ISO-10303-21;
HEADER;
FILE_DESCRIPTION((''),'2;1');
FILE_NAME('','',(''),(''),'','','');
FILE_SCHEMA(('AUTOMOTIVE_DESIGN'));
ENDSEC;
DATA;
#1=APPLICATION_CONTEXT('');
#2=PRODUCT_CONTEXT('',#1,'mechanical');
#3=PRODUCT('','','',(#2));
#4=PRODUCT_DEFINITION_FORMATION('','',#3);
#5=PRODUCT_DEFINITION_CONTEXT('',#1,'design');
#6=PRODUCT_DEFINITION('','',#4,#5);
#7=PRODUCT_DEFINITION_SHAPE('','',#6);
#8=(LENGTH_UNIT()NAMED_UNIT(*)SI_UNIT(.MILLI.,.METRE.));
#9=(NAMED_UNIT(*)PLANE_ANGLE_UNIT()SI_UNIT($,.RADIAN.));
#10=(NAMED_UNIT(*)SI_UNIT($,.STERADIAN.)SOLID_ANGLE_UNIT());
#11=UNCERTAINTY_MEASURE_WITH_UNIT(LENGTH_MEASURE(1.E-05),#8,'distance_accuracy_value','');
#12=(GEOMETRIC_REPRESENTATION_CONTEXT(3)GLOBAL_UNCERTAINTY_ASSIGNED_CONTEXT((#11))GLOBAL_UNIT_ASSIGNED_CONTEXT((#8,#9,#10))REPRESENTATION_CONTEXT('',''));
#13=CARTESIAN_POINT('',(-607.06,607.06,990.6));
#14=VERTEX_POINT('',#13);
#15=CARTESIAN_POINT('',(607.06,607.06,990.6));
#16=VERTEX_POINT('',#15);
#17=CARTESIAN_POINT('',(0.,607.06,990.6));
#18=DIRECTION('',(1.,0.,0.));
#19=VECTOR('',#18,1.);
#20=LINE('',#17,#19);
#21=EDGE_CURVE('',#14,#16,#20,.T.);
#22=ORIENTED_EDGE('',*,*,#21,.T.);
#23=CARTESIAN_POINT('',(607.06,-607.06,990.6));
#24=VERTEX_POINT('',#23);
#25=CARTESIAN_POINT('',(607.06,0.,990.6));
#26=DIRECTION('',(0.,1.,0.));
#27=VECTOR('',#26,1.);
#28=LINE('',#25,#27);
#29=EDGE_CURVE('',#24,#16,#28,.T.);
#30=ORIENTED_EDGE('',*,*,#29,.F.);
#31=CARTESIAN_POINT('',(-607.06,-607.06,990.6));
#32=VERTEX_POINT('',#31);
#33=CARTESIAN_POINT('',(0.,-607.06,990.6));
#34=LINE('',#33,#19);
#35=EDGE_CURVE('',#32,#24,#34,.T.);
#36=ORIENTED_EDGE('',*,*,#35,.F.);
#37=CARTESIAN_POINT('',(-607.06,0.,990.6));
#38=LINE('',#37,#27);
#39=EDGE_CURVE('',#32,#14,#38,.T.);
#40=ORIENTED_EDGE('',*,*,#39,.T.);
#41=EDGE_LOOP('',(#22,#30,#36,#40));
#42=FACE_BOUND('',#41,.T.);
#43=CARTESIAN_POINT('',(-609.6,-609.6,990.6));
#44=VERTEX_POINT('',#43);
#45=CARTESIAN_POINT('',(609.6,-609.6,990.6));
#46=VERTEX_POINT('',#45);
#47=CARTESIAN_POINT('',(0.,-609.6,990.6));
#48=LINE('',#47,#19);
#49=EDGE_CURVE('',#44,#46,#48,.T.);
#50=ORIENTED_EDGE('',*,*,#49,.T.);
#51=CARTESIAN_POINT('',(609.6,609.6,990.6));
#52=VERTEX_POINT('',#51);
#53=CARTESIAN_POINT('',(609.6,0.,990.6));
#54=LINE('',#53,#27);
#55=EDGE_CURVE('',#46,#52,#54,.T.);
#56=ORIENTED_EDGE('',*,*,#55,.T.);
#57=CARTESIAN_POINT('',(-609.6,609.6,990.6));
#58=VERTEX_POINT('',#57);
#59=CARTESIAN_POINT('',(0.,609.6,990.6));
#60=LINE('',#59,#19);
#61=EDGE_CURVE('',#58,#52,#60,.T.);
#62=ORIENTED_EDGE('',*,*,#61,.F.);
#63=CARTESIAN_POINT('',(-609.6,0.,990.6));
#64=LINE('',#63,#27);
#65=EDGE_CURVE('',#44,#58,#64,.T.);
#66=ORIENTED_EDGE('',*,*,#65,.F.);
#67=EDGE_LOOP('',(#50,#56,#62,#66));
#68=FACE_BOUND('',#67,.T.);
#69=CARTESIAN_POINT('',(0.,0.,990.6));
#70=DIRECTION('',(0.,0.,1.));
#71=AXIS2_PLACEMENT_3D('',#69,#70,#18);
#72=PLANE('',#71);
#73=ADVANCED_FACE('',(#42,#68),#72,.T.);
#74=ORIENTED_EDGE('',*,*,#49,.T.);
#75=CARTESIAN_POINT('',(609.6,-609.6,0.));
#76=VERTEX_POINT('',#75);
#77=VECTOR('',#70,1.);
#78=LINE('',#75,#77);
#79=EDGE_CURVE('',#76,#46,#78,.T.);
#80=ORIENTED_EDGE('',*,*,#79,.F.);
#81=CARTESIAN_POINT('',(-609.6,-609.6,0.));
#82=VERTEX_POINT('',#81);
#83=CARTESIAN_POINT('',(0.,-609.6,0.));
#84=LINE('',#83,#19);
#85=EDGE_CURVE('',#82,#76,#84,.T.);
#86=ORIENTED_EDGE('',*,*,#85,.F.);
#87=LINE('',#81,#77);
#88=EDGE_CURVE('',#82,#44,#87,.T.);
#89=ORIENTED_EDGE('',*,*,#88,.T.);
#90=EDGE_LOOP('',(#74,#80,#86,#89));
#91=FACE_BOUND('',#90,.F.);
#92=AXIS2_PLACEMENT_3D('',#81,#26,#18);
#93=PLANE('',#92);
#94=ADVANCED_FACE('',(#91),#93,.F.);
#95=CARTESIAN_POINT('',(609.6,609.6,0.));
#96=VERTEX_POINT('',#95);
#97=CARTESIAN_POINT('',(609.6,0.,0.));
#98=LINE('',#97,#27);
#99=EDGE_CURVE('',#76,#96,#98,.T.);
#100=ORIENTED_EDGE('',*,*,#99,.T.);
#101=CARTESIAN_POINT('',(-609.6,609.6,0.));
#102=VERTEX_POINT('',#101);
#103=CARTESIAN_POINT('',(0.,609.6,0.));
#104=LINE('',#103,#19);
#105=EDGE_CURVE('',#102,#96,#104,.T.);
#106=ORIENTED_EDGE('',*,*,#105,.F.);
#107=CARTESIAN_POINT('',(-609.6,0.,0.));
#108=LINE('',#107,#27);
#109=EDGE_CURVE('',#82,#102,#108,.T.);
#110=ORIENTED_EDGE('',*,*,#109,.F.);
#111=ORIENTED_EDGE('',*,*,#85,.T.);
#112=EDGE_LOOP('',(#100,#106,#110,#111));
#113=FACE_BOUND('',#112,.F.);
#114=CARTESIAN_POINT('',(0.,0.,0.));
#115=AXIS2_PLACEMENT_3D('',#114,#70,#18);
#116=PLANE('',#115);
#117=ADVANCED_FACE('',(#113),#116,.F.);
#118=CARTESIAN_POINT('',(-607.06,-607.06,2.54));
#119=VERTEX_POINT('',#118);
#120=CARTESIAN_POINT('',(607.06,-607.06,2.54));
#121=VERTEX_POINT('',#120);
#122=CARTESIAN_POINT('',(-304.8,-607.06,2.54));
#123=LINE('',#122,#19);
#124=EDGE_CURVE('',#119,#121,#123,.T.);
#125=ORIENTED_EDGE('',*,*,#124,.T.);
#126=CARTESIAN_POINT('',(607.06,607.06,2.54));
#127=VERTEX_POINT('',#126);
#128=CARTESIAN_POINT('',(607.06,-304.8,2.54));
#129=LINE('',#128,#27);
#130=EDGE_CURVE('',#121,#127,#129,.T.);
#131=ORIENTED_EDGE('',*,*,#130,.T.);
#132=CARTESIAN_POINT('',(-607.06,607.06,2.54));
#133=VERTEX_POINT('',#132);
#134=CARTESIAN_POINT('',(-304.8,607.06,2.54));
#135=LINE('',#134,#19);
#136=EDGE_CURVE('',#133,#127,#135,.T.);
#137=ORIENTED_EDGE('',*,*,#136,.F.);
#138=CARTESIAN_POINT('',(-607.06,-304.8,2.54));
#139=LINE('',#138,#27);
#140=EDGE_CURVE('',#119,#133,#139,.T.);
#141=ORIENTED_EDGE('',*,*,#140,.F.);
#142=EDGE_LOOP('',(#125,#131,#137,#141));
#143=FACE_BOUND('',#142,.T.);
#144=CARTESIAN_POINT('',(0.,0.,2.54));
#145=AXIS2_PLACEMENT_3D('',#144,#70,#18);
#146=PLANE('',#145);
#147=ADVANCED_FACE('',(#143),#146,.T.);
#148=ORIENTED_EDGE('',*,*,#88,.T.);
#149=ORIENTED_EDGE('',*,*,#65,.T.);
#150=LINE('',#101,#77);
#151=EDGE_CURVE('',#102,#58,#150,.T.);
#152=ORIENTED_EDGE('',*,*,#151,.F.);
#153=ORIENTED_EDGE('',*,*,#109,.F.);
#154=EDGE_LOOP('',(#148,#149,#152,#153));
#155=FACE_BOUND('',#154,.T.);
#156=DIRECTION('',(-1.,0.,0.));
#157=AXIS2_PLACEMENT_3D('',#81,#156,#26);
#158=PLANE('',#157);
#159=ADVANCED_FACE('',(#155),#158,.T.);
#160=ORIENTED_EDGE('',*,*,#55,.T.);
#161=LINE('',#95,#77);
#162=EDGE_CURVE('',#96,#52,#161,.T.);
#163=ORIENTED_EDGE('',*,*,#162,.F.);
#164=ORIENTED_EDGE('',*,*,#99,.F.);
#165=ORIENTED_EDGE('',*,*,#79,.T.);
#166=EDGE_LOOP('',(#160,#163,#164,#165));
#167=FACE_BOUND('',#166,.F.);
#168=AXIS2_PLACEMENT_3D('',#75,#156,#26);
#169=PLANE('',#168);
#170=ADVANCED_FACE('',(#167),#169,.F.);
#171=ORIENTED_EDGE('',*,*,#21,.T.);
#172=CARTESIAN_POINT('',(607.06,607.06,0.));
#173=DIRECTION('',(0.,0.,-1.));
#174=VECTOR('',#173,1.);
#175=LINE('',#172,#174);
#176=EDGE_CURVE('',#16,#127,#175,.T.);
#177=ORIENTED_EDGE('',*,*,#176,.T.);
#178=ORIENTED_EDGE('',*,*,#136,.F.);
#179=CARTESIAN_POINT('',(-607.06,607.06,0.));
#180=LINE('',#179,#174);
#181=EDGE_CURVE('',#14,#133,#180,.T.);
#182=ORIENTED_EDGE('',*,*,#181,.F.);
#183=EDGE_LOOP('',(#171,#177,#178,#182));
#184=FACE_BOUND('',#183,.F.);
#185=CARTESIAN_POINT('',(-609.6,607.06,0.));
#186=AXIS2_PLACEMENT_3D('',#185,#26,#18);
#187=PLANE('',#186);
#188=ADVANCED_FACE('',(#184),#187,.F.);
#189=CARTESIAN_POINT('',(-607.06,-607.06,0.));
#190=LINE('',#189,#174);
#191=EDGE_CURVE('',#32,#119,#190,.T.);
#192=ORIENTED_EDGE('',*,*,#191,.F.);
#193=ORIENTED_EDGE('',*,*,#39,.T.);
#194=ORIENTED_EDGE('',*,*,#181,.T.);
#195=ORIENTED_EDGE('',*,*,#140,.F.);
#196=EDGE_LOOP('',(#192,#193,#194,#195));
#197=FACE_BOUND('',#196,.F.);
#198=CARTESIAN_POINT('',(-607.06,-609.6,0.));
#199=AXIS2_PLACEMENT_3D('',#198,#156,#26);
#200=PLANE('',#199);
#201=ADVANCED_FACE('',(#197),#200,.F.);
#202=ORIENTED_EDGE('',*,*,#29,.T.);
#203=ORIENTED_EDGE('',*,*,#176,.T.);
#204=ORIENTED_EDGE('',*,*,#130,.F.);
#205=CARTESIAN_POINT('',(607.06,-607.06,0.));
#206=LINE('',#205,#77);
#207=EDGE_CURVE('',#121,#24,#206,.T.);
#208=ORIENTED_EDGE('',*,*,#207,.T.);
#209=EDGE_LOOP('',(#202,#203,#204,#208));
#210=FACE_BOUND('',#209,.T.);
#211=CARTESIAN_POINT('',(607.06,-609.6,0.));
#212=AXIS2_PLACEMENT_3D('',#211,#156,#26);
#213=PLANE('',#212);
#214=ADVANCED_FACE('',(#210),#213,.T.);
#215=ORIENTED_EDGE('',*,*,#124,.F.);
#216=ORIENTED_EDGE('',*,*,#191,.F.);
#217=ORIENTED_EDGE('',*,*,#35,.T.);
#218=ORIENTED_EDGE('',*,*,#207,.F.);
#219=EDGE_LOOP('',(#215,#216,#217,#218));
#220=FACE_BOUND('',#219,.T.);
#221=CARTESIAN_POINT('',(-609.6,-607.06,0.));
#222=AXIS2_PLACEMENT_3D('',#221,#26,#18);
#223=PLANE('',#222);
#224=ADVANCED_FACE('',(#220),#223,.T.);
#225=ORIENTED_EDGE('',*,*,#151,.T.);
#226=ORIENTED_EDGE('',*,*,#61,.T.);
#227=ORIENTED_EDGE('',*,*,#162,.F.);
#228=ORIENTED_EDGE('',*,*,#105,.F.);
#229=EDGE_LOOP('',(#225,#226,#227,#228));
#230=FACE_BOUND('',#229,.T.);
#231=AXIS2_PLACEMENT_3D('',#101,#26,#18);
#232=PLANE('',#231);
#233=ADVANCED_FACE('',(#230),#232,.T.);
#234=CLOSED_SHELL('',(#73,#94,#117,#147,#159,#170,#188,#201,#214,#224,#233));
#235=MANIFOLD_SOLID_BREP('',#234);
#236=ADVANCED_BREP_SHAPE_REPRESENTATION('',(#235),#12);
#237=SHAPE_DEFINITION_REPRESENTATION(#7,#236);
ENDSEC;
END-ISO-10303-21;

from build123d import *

# Parameters (mm, degrees)
F0_W     = 1219.2
F0_H     = 1219.2
F1_DEPTH = 990.6
F2_T     = -2.54


# Not quite as in the source:
# - the program builds the solid bodies; features that only make, move or delete a surface that nothing else refers to are left out


with BuildPart() as f1:
    # F0 (on Top) → F1 (new body)
    with BuildSketch(Plane.XY):
        Rectangle(F0_W, F0_H)
    extrude(amount=F1_DEPTH)

    # F2
    f2_openings = [f1.faces().sort_by_distance(p)[0] for p in [
        (0, 0, 990.6),
    ]]
    offset(amount=F2_T, openings=f2_openings)


solid = f1.part
